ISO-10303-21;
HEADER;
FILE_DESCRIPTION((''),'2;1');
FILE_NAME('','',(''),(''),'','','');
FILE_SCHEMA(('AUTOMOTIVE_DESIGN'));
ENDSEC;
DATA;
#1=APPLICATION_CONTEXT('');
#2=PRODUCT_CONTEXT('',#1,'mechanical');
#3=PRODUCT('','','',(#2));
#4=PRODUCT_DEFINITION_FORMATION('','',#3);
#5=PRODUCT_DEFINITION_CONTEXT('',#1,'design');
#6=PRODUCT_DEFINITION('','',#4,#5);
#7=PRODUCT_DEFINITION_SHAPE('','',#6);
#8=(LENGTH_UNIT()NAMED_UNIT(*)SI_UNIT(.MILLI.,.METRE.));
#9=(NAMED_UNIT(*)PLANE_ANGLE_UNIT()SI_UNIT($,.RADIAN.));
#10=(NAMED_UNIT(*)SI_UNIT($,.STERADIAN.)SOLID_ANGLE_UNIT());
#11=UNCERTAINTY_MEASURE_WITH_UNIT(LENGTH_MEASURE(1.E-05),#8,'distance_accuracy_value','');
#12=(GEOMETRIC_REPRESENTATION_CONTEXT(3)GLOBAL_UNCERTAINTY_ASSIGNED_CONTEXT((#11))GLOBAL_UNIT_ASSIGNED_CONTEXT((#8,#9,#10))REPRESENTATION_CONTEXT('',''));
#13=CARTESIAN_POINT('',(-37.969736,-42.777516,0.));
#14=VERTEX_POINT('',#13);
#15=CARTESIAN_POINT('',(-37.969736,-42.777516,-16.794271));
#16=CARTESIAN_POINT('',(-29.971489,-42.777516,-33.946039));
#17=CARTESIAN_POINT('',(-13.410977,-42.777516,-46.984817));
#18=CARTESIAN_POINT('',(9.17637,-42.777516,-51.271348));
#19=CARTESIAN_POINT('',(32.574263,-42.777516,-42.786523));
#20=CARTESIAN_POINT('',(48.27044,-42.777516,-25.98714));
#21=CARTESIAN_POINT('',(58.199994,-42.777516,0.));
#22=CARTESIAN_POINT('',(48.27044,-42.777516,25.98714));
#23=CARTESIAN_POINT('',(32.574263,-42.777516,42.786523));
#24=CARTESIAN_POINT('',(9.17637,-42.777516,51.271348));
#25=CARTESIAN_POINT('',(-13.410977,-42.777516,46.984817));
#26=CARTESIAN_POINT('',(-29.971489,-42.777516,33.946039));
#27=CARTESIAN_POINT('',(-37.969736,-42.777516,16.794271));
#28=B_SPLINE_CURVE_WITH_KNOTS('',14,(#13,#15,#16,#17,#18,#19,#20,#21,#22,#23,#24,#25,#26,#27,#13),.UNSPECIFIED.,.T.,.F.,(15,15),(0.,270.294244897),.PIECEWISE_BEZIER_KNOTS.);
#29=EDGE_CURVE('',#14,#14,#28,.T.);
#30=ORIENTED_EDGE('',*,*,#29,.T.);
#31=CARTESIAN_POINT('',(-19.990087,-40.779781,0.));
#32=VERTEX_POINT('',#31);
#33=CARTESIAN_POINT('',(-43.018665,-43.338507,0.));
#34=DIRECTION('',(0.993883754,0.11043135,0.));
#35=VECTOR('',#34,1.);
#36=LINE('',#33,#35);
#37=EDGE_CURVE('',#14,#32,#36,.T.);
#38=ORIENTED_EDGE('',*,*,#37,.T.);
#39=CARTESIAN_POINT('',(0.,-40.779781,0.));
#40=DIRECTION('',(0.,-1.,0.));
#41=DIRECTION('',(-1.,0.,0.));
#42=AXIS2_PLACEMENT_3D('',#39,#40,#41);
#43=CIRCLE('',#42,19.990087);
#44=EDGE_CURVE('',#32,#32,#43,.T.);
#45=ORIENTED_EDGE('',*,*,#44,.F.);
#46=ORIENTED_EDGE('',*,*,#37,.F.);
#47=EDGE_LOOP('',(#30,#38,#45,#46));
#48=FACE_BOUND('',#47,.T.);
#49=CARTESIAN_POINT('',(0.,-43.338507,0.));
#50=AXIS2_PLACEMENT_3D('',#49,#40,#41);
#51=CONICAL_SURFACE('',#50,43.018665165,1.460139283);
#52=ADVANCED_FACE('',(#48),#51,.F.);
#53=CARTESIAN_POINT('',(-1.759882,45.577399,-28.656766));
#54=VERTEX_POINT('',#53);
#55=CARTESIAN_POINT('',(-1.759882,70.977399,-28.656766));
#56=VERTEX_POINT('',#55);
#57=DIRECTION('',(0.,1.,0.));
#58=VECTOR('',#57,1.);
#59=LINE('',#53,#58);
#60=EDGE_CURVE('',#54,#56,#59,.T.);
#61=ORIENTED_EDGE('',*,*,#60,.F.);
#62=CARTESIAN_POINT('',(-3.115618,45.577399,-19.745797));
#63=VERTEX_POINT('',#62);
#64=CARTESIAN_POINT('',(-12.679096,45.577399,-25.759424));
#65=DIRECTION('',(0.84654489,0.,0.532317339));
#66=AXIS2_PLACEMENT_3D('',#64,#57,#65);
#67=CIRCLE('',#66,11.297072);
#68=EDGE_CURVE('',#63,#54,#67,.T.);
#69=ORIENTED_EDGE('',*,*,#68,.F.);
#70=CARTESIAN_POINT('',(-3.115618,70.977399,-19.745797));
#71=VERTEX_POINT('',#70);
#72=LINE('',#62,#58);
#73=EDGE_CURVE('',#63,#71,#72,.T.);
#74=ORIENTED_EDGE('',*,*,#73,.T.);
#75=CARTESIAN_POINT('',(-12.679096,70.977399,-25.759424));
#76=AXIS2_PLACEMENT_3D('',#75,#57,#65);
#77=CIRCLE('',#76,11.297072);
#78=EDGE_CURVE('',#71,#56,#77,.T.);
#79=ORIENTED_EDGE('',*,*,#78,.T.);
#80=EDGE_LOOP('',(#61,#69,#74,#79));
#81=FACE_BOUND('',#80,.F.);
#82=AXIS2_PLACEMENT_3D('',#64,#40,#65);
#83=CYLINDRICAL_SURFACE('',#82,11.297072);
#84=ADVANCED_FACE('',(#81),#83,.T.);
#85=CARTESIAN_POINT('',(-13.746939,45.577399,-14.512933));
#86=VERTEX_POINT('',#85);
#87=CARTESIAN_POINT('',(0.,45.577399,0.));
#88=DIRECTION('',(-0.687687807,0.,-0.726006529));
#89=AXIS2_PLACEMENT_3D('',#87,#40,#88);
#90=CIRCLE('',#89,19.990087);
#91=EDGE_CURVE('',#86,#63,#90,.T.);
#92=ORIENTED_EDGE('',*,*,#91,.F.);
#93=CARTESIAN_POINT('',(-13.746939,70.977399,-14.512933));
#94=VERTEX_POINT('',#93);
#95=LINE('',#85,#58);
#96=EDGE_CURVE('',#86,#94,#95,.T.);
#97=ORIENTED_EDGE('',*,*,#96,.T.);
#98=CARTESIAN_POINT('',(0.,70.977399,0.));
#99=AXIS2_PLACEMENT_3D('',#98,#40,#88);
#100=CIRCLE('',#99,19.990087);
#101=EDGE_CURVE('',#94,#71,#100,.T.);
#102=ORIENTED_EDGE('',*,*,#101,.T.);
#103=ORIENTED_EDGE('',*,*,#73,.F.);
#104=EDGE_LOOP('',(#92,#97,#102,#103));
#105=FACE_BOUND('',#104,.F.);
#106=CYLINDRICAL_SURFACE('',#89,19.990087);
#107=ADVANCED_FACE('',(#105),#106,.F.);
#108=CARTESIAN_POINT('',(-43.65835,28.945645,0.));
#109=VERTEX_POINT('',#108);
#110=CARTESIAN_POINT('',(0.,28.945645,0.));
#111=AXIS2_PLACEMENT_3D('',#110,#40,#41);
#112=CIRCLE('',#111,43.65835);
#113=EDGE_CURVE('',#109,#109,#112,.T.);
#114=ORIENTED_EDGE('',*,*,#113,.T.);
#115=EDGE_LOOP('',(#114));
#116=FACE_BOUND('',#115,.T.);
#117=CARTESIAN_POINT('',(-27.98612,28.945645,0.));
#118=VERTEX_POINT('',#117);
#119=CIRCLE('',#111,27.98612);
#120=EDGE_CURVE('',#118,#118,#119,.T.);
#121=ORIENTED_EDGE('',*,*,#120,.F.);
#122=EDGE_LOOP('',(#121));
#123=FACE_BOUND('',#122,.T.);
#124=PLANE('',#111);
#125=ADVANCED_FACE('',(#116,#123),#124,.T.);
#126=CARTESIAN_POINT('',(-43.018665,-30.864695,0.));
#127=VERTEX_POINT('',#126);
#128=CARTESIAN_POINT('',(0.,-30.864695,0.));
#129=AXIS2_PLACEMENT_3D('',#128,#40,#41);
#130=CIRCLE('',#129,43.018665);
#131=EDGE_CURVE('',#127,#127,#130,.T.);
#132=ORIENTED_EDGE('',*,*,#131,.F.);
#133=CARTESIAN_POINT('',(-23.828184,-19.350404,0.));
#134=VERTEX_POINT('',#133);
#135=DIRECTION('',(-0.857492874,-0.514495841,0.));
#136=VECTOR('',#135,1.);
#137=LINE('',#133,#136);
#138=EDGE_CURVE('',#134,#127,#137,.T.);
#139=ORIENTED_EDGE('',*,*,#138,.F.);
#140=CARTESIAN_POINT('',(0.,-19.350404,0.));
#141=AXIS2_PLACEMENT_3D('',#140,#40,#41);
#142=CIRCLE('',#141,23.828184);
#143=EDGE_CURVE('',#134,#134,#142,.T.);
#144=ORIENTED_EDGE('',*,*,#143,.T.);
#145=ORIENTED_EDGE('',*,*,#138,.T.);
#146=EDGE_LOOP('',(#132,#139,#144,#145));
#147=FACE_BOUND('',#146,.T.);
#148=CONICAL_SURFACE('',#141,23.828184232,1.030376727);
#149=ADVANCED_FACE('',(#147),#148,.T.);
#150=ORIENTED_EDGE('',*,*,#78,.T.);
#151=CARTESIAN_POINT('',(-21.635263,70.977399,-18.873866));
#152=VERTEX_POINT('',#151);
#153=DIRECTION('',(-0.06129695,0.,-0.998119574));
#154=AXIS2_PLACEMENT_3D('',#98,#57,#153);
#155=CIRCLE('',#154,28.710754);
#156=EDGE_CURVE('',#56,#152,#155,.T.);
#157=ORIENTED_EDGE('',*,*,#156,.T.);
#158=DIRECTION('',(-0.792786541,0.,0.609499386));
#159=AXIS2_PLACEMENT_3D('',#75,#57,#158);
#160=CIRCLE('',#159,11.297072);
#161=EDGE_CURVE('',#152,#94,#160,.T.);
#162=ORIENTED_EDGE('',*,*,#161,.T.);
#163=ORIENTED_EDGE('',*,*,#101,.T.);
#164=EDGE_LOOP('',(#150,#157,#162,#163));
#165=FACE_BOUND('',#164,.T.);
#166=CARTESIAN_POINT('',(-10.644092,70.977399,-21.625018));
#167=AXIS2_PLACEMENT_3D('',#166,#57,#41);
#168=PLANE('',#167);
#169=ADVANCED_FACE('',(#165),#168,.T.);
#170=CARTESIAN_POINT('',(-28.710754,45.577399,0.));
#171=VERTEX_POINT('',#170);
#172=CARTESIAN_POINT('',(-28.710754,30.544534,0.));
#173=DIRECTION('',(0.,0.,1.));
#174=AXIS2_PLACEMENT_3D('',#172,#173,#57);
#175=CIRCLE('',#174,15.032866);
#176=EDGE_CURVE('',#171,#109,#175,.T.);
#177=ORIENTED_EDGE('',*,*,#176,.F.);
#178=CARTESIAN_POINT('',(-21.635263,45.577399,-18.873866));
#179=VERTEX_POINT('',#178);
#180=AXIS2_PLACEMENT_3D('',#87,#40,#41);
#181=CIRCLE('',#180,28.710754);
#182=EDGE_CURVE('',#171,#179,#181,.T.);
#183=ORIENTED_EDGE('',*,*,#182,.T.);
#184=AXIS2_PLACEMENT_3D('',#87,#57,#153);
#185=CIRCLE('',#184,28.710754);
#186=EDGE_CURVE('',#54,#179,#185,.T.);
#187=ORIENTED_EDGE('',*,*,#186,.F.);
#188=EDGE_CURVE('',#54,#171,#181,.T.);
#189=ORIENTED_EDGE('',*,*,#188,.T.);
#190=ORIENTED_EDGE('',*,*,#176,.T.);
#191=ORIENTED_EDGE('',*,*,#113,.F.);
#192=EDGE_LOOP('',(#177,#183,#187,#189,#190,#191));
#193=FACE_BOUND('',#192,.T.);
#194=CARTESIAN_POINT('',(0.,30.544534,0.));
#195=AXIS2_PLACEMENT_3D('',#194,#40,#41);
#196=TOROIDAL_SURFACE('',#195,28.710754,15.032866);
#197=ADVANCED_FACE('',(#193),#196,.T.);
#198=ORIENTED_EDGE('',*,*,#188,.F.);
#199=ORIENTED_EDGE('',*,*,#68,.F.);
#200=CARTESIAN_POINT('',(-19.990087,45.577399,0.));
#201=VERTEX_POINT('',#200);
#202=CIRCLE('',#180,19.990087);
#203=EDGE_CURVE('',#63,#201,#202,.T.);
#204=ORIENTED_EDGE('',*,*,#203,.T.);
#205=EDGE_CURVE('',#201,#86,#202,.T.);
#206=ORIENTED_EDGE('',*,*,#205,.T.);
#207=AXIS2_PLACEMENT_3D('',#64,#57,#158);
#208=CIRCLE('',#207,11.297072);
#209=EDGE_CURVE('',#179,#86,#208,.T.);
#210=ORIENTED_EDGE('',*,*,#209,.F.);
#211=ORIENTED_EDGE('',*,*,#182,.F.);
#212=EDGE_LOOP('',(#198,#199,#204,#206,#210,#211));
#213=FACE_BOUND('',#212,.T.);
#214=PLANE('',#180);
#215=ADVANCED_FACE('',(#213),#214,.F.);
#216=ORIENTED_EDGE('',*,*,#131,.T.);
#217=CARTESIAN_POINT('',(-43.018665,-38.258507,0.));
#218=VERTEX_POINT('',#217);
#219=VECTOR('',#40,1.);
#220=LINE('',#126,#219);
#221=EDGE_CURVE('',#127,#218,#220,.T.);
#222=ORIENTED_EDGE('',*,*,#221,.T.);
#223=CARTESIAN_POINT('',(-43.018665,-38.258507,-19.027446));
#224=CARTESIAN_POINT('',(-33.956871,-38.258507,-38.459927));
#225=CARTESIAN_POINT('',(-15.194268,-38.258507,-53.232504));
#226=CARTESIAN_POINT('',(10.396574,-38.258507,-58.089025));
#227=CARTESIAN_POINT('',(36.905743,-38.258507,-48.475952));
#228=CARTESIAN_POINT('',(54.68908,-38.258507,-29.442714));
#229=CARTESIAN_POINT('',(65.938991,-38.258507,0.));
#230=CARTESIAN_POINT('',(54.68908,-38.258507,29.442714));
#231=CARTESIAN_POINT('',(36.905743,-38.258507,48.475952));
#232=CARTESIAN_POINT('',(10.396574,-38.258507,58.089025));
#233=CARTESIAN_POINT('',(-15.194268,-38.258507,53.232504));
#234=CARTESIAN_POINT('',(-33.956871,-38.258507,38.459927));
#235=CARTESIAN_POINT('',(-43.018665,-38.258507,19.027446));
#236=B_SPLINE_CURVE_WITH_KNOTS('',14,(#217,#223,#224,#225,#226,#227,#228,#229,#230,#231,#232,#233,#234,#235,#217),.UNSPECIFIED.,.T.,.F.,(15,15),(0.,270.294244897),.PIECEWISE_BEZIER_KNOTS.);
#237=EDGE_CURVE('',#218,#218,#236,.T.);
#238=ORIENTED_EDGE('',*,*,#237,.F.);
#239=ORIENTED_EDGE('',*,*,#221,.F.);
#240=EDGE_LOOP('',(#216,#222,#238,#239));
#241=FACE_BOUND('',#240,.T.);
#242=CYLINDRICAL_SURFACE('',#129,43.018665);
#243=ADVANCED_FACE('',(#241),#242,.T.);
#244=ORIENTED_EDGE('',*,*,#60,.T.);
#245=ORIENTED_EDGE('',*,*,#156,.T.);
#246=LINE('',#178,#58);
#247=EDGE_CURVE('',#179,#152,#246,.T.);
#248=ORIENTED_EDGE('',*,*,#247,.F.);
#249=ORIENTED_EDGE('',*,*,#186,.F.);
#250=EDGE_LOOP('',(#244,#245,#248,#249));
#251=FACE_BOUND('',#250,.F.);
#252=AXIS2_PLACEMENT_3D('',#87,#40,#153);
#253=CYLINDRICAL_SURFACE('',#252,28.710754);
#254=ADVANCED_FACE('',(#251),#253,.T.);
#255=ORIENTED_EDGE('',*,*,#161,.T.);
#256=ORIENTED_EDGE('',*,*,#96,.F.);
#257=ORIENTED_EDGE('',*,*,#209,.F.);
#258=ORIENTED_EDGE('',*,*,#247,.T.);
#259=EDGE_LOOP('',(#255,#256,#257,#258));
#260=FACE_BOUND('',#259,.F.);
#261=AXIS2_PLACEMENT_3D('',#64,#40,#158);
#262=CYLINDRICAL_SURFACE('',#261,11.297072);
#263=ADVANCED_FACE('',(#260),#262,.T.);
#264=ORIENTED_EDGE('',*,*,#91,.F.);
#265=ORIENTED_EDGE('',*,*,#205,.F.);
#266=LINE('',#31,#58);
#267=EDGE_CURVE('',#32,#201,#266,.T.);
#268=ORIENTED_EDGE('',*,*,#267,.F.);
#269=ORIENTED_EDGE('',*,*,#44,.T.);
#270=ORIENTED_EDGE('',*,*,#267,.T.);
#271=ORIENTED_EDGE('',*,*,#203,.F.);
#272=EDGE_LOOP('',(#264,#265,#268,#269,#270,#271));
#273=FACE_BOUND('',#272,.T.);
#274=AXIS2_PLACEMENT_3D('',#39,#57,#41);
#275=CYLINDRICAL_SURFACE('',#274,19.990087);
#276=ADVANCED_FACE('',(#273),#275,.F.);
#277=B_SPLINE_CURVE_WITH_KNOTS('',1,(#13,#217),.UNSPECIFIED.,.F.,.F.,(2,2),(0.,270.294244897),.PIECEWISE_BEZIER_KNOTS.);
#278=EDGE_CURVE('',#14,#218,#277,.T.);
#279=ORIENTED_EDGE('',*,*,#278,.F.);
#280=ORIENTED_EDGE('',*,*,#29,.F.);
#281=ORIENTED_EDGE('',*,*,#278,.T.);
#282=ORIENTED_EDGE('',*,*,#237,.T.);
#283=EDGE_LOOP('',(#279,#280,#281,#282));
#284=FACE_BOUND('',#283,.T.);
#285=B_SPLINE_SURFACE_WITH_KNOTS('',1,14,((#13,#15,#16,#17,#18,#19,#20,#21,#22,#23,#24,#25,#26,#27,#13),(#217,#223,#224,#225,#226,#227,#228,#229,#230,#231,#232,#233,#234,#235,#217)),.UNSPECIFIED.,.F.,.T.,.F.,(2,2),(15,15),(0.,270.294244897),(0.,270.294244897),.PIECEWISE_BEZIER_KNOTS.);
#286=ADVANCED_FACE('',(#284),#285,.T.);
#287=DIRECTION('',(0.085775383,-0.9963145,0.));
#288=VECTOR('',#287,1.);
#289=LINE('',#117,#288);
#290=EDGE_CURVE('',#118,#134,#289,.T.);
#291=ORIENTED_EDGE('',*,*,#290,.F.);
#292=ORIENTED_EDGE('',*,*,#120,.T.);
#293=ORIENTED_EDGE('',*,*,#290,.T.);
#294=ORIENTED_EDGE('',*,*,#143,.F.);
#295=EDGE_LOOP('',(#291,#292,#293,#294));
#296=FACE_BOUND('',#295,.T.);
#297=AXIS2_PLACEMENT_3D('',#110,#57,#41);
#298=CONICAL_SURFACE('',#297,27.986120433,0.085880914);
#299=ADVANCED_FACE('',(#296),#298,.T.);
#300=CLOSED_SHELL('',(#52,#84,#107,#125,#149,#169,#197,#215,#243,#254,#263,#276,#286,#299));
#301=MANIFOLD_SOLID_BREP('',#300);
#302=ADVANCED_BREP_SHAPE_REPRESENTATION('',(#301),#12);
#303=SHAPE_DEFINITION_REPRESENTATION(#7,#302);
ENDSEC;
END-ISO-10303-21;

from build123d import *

# Parameters (mm, degrees)
F3_SIZE  = 5.08
F5_DEPTH = 25.4


# Not quite as in the source:
# - a fillet or chamfer that OpenCascade refuses, or shapes differently, is made with other operations: its cross-section is extruded or revolved along the edge and cut away or added


with BuildPart() as f1:
    # F0 (on Top) → F1 (revolve)
    with BuildSketch(Plane.XY):
        Polygon((-19.9900865555, -40.7797805965), (-19.9900865555, 45.5773994327), (-51.6543835402, 45.5773994327), (-43.658349663, 28.9456453174), (-27.9861204326, 28.9456453174), (-23.8281842321, -19.3504039198), (-43.0186651647, -30.8646950871), (-43.0186651647, -43.3385074139), align=None)
    revolve(axis=Axis((0, -1.2793652713, 0), (0, -1, 0)))

    # F2: fillet of radius 15.0328655844 on 1 edges, made by hand

    # F2_s1 → F2_t2 (revolve, cut)
    with BuildSketch(Plane.XY):
        with BuildLine():
            ThreePointArc((-28.7107544335, 45.5773994327), (-39.8916069066, 40.5931947369), (-43.658349663, 28.9456453174))
            Line((-43.658349663, 28.9456453174), (-51.6543835402, 45.5773994327))
            Line((-51.6543835402, 45.5773994327), (-28.7107544335, 45.5773994327))
        make_face()
    revolve(axis=Axis((0, 45.5773994327, 0), (0, -1, 0)), mode=Mode.SUBTRACT)

    # F3
    f3_edges = [f1.edges().sort_by_distance(p)[0] for p in [
        (43.018665, -43.338507, 0),
    ]]
    chamfer(f3_edges, length=F3_SIZE)

    # F4 (on face) → F5 (join)
    with BuildSketch(Plane(origin=(0, 45.5773994327, 0), x_dir=(-1, 0, 0), z_dir=(0, 1, 0))):
        with BuildLine():
            ThreePointArc((1.7598816693, -28.6567659838), (12.6790964927, -25.7594241448), (21.635263345, -18.8738655324))
            ThreePointArc((21.635263345, -18.8738655324), (18.1448647045, -15.8726036273), (13.7469387774, -14.5129333612))
            ThreePointArc((13.7469387774, -14.5129333612), (8.8279197581, -17.9351998383), (3.1156176835, -19.7457966906))
            ThreePointArc((3.1156176835, -19.7457966906), (1.5105456445, -24.0602143155), (1.7598816693, -28.6567659838))
        make_face()
    extrude(amount=F5_DEPTH)


solid = f1.part
